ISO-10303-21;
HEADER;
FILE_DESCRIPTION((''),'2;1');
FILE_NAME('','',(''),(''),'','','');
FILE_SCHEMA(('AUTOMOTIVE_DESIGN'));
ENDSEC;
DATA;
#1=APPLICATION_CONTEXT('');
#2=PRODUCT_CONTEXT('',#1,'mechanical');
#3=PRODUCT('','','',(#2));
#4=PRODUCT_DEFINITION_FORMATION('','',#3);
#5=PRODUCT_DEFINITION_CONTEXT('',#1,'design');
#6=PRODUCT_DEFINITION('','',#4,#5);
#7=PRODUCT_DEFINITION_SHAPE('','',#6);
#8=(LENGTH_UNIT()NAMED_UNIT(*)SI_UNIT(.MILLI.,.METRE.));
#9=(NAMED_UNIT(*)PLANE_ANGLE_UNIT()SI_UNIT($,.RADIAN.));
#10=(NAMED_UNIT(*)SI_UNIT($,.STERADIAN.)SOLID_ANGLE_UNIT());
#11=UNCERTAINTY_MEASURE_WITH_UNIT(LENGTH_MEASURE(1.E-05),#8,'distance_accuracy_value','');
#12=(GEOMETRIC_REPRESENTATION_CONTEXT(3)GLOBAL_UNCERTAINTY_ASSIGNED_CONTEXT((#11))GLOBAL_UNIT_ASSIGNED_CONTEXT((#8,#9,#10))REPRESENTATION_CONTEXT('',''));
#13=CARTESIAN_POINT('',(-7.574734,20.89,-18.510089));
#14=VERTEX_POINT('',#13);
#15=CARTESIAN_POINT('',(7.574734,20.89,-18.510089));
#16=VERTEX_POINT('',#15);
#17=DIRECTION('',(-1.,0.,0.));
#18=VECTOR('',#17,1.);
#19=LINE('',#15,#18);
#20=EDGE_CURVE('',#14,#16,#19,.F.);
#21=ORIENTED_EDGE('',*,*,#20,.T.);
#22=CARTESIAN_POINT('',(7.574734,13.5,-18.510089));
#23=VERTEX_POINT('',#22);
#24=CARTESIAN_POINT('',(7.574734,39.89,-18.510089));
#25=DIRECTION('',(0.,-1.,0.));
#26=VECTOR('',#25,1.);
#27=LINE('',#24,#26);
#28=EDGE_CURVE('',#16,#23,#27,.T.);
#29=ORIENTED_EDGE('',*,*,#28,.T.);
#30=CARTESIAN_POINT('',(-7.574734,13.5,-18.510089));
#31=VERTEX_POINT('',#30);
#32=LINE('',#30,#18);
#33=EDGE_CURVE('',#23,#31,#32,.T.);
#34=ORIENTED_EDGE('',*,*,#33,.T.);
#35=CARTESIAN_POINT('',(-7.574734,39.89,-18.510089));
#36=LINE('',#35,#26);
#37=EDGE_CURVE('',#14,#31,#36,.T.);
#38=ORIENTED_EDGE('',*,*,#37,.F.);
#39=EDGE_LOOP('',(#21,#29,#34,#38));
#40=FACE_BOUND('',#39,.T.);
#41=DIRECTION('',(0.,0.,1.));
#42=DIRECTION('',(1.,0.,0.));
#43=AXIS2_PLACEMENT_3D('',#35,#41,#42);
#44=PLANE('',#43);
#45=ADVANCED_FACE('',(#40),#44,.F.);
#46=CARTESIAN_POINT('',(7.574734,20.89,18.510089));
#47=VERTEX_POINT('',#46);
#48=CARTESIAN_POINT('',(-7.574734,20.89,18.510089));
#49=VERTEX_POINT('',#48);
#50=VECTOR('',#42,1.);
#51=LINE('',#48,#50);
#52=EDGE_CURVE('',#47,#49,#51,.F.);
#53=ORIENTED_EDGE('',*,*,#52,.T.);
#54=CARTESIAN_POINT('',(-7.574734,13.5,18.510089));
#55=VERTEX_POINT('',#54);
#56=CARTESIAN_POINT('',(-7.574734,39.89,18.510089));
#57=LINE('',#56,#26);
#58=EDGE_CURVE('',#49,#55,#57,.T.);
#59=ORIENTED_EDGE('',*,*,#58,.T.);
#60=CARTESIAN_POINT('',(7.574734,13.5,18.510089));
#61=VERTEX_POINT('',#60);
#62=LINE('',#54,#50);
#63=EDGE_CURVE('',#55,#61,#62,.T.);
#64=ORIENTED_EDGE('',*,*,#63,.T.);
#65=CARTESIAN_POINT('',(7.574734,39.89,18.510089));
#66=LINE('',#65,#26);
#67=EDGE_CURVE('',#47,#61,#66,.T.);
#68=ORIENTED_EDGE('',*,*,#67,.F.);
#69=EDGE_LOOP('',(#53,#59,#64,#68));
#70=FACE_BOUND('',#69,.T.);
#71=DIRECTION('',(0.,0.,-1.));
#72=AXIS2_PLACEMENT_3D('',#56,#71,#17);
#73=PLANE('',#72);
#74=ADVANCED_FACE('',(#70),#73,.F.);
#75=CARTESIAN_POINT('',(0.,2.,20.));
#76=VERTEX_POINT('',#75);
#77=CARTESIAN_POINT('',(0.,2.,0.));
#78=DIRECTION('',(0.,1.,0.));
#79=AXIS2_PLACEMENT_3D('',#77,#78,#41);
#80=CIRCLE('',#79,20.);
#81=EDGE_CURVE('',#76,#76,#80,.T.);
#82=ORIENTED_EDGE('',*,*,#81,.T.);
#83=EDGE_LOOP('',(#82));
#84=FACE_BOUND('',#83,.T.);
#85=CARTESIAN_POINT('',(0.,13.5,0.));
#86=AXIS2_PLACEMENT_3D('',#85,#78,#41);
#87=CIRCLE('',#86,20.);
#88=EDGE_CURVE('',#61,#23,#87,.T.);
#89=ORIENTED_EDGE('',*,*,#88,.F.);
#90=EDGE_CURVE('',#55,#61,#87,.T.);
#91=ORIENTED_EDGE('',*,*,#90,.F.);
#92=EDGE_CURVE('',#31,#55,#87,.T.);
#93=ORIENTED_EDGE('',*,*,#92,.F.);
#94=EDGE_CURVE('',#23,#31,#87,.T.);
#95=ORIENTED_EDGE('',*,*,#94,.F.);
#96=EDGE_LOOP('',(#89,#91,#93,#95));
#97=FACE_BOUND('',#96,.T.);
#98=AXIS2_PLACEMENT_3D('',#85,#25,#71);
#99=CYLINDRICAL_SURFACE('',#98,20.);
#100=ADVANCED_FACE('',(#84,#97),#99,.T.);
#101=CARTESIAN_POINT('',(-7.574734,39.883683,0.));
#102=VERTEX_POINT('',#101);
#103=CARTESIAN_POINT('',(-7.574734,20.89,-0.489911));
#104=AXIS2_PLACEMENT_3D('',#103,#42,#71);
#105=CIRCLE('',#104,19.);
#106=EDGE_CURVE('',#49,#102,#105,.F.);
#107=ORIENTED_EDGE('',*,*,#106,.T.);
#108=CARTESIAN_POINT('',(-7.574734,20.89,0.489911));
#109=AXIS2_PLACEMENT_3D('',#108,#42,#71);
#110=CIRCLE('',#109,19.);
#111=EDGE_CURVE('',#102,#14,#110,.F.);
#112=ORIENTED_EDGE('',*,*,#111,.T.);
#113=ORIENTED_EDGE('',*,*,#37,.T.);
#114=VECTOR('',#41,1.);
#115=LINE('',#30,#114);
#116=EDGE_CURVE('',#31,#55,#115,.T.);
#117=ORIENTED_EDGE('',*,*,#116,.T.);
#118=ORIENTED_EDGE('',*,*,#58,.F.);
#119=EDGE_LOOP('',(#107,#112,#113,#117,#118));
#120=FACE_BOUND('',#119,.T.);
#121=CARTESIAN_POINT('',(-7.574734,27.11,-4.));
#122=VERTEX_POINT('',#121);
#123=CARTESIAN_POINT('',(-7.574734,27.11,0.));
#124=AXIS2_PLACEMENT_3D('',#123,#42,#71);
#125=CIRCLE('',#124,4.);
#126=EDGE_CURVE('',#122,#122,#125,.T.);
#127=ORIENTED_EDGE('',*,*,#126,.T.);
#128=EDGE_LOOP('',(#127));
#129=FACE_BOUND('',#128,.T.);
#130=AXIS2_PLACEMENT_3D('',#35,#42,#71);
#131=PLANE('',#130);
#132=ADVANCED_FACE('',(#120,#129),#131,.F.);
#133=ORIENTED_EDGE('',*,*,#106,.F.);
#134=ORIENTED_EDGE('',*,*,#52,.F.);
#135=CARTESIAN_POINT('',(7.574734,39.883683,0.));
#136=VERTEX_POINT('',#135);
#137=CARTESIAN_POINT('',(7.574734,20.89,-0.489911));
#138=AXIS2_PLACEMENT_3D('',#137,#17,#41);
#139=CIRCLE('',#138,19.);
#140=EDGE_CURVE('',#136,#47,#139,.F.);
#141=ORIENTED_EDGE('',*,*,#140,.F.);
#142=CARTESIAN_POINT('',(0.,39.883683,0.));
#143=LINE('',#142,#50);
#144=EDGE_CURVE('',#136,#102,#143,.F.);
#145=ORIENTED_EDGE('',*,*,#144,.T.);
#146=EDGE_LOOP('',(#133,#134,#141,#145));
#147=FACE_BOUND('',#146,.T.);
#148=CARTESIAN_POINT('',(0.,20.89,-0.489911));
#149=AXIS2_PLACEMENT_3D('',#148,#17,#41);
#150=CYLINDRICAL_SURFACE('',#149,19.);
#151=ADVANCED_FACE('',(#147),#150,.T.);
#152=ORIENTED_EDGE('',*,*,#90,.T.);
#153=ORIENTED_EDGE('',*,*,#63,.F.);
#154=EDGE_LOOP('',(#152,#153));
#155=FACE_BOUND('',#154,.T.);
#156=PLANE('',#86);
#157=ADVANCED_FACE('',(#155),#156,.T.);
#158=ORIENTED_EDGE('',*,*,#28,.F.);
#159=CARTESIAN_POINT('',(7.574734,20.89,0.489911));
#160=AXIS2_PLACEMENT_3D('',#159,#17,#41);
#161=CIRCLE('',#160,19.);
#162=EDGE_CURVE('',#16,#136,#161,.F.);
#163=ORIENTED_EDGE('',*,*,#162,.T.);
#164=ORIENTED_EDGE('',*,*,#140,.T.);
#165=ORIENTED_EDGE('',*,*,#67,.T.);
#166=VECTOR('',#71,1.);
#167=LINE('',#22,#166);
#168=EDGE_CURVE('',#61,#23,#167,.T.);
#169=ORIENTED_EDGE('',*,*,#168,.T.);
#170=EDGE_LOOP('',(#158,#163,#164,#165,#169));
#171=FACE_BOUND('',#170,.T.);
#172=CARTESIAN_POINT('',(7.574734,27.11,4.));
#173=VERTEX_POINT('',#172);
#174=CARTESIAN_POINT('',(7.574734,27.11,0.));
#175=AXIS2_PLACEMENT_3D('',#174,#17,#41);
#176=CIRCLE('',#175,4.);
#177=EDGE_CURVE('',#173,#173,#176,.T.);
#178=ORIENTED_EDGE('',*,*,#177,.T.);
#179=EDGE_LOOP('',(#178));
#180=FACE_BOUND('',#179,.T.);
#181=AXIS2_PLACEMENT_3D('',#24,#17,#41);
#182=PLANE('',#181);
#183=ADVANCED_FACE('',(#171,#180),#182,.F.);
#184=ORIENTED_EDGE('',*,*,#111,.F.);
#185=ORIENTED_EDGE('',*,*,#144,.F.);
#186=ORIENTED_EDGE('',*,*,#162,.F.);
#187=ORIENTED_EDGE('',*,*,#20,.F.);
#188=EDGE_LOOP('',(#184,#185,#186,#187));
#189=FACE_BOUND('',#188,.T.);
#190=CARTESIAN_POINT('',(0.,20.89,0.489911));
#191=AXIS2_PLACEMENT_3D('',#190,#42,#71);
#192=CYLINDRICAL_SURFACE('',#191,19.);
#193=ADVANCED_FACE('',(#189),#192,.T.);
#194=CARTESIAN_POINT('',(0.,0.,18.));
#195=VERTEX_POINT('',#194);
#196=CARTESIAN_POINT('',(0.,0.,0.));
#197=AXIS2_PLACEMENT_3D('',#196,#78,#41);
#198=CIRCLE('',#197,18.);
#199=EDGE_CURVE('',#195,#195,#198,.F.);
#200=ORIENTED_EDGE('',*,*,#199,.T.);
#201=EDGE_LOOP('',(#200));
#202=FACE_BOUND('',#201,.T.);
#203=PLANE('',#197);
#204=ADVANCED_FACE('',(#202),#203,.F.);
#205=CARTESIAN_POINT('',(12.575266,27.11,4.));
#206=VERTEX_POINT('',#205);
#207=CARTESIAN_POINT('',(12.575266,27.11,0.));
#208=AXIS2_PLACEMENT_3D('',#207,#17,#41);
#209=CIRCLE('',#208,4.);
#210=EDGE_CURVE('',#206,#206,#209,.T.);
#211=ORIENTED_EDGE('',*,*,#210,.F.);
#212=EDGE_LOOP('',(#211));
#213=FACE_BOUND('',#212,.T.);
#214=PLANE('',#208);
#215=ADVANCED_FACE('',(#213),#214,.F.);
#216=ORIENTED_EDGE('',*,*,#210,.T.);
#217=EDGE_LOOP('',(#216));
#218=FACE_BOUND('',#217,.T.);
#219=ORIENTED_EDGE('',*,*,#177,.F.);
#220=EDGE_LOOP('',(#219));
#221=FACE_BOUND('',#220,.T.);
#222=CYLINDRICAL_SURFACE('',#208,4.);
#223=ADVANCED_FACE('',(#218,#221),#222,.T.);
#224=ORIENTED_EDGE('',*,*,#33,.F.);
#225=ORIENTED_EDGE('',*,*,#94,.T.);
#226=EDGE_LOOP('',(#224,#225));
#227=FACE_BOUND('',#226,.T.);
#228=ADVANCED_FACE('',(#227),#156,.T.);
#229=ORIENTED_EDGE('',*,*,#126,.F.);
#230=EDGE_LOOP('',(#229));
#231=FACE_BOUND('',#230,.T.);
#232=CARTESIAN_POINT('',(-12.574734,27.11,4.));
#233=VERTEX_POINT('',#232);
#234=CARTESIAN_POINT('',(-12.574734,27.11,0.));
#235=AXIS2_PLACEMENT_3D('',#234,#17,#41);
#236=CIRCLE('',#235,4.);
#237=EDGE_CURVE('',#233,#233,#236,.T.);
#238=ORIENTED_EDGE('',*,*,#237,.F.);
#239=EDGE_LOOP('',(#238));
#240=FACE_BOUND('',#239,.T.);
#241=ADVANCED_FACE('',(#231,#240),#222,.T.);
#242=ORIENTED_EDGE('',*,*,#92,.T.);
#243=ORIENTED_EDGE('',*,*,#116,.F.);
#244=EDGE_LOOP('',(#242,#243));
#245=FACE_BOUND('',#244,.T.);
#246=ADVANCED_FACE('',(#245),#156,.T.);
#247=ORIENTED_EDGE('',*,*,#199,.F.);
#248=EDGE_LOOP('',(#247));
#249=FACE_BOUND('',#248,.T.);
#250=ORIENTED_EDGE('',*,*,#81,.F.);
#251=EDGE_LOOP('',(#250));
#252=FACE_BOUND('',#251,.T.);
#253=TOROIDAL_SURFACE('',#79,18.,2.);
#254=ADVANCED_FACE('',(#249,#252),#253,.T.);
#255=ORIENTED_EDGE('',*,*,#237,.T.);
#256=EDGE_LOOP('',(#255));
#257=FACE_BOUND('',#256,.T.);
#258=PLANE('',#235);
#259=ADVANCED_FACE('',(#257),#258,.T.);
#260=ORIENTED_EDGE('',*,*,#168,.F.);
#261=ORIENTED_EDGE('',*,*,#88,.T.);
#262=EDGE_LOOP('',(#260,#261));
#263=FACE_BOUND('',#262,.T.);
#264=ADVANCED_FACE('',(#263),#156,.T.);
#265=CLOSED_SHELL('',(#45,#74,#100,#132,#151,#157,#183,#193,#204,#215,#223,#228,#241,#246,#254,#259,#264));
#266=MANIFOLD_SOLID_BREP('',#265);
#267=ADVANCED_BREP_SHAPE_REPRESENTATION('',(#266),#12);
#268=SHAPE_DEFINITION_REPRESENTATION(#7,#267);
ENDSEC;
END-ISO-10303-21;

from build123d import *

# Parameters (mm, degrees)
CROQUIS1_R                   = 20
SALIENTE_EXTRUIR1_DEPTH      = 13.5
REDONDEO1_R                  = 2
CROQUIS2_W                   = 15.149467894
CROQUIS2_H                   = 37.020178586
SALIENTE_EXTRUIR2_DEPTH      = 26.39
SALIENTE_EXTRUIR3_DEPTH      = 5
SALIENTE_EXTRUIR3_DEPTH_BACK = 20.15
CROQUIS3_R                   = 4
REDONDEO2_R                  = 19


with BuildPart() as part:
    # Croquis1 → Saliente-Extruir1 (new body)
    with BuildSketch(Plane(origin=(0, 0, 0), x_dir=(1, 0, 0), z_dir=(0, 1, 0))):
        with Locations(Location((0, 0, 0), (0, 0, 270))):
            Circle(CROQUIS1_R)
    extrude(amount=SALIENTE_EXTRUIR1_DEPTH)

    # Redondeo1
    redondeo1_edges = [part.edges().sort_by_distance(p)[0] for p in [
        (0, 0, -20),
    ]]
    fillet(redondeo1_edges, radius=REDONDEO1_R)

    # Croquis2 → Saliente-Extruir2 (add)
    with BuildSketch(Plane(origin=(0, 13.5, 0), x_dir=(1, 0, 0), z_dir=(0, 1, 0))):
        Rectangle(CROQUIS2_W, CROQUIS2_H)
    extrude(amount=SALIENTE_EXTRUIR2_DEPTH)

    # Croquis3 → Saliente-Extruir3 (add, two sides: drawn at the far end of the back side and taken through both)
    with BuildSketch(Plane.ZY.offset(7.574733947).offset(-SALIENTE_EXTRUIR3_DEPTH_BACK)):
        with Locations((0, 27.11)):
            Circle(CROQUIS3_R)
    extrude(amount=SALIENTE_EXTRUIR3_DEPTH + SALIENTE_EXTRUIR3_DEPTH_BACK)

    # Redondeo2
    # the kernel refuses this fillet: 19 mm, written as the material it takes off along each edge
    with BuildSketch(Plane(origin=(55.074733947, 39.89, 18.510089293), x_dir=(0, -1, 0), z_dir=(-1, 0, 0)), Plane(origin=(-55.074733947, 39.89, -18.510089293), x_dir=(0, -1, 0), z_dir=(1, 0, 0))) as redondeo2_piece_1:
        with BuildLine():
            CenterArc((REDONDEO2_R, -REDONDEO2_R), REDONDEO2_R, 90, 90)
            Line((0, -REDONDEO2_R), (0, 0))
            Line((0, 0), (REDONDEO2_R, 0))
        make_face()
    extrude(amount=110.149467894, mode=Mode.SUBTRACT)


solid = part.part
